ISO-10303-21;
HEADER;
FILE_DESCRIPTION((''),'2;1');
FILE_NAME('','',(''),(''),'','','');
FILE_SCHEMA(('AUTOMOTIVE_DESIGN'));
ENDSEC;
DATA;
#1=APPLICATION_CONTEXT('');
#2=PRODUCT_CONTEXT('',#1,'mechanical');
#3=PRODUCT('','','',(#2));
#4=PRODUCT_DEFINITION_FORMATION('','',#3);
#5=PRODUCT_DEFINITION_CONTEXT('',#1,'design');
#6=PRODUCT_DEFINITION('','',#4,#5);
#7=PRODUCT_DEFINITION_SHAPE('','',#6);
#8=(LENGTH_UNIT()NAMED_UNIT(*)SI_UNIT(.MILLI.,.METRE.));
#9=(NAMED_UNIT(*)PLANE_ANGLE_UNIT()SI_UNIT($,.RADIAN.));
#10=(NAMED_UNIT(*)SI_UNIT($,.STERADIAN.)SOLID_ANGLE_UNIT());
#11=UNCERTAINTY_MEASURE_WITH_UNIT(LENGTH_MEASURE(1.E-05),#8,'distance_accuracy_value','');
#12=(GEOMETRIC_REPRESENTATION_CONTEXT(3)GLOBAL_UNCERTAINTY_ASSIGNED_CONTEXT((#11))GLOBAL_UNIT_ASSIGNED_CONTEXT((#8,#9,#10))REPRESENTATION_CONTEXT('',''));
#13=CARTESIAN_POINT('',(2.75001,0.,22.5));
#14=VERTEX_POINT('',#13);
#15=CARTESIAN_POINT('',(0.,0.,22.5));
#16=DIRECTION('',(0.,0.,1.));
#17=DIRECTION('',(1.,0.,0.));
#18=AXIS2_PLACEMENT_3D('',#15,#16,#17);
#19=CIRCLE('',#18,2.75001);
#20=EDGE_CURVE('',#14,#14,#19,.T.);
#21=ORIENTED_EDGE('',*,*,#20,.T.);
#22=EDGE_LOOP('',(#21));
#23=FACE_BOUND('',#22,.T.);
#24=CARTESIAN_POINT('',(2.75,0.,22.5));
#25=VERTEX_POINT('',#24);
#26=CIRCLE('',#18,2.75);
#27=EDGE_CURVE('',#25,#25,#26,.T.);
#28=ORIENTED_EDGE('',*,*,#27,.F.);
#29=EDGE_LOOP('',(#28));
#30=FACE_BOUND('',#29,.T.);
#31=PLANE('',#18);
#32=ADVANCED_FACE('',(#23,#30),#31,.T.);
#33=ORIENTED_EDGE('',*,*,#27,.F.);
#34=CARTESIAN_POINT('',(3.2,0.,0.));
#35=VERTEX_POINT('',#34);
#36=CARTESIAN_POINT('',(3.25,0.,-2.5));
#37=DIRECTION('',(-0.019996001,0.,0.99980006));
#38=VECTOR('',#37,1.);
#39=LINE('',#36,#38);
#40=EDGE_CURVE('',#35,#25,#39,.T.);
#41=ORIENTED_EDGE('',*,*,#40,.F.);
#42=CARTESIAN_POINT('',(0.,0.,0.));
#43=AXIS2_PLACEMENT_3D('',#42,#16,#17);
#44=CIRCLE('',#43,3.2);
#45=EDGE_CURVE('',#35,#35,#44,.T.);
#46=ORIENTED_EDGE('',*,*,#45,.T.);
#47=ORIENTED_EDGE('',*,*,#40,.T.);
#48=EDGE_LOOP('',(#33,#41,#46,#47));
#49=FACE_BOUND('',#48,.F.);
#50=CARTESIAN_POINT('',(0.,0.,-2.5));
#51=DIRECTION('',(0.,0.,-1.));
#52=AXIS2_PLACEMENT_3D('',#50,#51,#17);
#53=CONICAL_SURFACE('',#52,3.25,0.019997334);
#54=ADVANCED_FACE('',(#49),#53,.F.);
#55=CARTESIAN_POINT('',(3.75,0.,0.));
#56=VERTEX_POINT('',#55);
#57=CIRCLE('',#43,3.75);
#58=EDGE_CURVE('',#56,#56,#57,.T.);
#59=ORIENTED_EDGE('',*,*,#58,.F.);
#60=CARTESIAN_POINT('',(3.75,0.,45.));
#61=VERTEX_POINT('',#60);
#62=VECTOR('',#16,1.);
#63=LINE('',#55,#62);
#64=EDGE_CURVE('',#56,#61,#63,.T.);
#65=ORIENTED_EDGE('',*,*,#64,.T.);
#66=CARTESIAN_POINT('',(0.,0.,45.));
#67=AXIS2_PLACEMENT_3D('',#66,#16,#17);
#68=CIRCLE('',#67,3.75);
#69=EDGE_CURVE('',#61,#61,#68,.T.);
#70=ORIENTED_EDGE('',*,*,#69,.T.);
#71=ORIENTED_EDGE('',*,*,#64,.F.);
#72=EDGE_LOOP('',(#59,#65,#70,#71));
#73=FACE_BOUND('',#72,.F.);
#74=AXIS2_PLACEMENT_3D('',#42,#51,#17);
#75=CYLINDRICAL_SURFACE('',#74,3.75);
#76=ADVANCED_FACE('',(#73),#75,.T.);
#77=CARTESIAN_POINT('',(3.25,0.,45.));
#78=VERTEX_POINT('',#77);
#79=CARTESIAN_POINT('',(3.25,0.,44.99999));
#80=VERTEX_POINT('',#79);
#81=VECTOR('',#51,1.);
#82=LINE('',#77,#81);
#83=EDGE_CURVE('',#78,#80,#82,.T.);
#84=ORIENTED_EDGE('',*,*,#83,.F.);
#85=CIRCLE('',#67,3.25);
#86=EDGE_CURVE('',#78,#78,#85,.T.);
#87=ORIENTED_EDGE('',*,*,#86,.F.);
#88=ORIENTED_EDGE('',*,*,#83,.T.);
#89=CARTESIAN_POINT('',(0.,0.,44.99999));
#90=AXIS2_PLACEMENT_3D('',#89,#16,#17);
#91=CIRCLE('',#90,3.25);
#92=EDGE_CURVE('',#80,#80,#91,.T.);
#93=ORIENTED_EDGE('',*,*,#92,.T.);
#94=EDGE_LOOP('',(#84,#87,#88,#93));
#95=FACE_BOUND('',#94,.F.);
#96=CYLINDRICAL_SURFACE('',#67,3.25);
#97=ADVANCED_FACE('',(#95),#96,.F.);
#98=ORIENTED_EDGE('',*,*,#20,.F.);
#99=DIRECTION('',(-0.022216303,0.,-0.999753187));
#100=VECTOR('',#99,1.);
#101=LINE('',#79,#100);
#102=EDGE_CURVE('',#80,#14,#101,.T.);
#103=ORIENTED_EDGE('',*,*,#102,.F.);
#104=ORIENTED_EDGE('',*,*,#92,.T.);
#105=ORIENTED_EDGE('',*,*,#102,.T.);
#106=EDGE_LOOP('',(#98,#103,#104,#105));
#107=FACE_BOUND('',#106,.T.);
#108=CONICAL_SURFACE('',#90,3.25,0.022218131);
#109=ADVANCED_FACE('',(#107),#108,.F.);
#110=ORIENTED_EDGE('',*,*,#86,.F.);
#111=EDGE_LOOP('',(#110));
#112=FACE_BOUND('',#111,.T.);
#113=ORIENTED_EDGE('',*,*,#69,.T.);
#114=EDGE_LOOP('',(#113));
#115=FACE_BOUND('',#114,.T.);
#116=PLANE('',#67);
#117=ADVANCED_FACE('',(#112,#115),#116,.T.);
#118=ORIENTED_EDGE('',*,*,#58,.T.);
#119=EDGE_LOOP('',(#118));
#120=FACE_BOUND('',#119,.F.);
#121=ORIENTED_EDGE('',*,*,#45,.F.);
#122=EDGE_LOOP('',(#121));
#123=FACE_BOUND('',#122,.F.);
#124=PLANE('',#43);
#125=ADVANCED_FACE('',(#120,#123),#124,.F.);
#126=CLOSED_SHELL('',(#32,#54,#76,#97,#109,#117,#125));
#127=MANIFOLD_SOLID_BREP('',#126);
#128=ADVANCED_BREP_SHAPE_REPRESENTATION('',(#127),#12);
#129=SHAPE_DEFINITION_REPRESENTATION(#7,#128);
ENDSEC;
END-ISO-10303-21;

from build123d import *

# Parameters (mm, degrees)
F0_R     = 3.75
F1_DEPTH = 45
F2_R     = 3.25
F3_DEPTH = 22.5
F5_R     = 3.25
F6_DEPTH = 22.5
F7_SIZE2 = 0.49999
F7_SIZE  = 22.49999


# Not quite as in the source:
# - a fillet or chamfer that OpenCascade refuses, or shapes differently, is made with other operations: its cross-section is extruded or revolved along the edge and cut away or added
# - a fillet or chamfer is up to 0.001 mm smaller than in the source, because OpenCascade refuses the exact size


with BuildPart() as f1:
    # F0 (on Top) → F1 (new body)
    with BuildSketch(Plane.XY):
        Circle(F0_R)
    extrude(amount=F1_DEPTH)

    # F2 (on face) → F3 (cut)
    with BuildSketch(Plane.XY):
        Circle(F2_R)
    extrude(amount=F3_DEPTH, mode=Mode.SUBTRACT)

    # F4: chamfer of 25 x 0.5 on 1 edges, made by hand


with BuildPart() as f4_tool2:
    # F4_s3 → F4_t4 (revolve)
    with BuildSketch(Plane.XZ):
        Polygon((3.25, -2.5), (2.75, 22.5), (3.25, 22.5), align=None)
    revolve(axis=Axis((0, 0, 22.5), (0, 0, 1)))

    split(bisect_by=Plane.XY, keep=Keep.TOP)


with BuildPart() as f1_1:
    add(f1.part)

    # F4_t1: union F4_tool2
    add(f4_tool2.part)

    # F5 (on face) → F6 (cut)
    with BuildSketch(Plane.XY.offset(45)):
        Circle(F5_R)
    extrude(amount=-F6_DEPTH, mode=Mode.SUBTRACT)

    # F7 (size 22.5 and 0.5 in the source; OpenCascade refuses exactly that, so slightly less here)
    f7_edges = [f1_1.edges().sort_by_distance(p)[0] for p in [
        (-3.25, 0, 22.5),
    ]]
    f7_side = f1_1.faces().sort_by_distance((-3.25, 0, 33.75))[0]
    chamfer(f7_edges, length=F7_SIZE, length2=F7_SIZE2, reference=f7_side)


solid = f1_1.part
